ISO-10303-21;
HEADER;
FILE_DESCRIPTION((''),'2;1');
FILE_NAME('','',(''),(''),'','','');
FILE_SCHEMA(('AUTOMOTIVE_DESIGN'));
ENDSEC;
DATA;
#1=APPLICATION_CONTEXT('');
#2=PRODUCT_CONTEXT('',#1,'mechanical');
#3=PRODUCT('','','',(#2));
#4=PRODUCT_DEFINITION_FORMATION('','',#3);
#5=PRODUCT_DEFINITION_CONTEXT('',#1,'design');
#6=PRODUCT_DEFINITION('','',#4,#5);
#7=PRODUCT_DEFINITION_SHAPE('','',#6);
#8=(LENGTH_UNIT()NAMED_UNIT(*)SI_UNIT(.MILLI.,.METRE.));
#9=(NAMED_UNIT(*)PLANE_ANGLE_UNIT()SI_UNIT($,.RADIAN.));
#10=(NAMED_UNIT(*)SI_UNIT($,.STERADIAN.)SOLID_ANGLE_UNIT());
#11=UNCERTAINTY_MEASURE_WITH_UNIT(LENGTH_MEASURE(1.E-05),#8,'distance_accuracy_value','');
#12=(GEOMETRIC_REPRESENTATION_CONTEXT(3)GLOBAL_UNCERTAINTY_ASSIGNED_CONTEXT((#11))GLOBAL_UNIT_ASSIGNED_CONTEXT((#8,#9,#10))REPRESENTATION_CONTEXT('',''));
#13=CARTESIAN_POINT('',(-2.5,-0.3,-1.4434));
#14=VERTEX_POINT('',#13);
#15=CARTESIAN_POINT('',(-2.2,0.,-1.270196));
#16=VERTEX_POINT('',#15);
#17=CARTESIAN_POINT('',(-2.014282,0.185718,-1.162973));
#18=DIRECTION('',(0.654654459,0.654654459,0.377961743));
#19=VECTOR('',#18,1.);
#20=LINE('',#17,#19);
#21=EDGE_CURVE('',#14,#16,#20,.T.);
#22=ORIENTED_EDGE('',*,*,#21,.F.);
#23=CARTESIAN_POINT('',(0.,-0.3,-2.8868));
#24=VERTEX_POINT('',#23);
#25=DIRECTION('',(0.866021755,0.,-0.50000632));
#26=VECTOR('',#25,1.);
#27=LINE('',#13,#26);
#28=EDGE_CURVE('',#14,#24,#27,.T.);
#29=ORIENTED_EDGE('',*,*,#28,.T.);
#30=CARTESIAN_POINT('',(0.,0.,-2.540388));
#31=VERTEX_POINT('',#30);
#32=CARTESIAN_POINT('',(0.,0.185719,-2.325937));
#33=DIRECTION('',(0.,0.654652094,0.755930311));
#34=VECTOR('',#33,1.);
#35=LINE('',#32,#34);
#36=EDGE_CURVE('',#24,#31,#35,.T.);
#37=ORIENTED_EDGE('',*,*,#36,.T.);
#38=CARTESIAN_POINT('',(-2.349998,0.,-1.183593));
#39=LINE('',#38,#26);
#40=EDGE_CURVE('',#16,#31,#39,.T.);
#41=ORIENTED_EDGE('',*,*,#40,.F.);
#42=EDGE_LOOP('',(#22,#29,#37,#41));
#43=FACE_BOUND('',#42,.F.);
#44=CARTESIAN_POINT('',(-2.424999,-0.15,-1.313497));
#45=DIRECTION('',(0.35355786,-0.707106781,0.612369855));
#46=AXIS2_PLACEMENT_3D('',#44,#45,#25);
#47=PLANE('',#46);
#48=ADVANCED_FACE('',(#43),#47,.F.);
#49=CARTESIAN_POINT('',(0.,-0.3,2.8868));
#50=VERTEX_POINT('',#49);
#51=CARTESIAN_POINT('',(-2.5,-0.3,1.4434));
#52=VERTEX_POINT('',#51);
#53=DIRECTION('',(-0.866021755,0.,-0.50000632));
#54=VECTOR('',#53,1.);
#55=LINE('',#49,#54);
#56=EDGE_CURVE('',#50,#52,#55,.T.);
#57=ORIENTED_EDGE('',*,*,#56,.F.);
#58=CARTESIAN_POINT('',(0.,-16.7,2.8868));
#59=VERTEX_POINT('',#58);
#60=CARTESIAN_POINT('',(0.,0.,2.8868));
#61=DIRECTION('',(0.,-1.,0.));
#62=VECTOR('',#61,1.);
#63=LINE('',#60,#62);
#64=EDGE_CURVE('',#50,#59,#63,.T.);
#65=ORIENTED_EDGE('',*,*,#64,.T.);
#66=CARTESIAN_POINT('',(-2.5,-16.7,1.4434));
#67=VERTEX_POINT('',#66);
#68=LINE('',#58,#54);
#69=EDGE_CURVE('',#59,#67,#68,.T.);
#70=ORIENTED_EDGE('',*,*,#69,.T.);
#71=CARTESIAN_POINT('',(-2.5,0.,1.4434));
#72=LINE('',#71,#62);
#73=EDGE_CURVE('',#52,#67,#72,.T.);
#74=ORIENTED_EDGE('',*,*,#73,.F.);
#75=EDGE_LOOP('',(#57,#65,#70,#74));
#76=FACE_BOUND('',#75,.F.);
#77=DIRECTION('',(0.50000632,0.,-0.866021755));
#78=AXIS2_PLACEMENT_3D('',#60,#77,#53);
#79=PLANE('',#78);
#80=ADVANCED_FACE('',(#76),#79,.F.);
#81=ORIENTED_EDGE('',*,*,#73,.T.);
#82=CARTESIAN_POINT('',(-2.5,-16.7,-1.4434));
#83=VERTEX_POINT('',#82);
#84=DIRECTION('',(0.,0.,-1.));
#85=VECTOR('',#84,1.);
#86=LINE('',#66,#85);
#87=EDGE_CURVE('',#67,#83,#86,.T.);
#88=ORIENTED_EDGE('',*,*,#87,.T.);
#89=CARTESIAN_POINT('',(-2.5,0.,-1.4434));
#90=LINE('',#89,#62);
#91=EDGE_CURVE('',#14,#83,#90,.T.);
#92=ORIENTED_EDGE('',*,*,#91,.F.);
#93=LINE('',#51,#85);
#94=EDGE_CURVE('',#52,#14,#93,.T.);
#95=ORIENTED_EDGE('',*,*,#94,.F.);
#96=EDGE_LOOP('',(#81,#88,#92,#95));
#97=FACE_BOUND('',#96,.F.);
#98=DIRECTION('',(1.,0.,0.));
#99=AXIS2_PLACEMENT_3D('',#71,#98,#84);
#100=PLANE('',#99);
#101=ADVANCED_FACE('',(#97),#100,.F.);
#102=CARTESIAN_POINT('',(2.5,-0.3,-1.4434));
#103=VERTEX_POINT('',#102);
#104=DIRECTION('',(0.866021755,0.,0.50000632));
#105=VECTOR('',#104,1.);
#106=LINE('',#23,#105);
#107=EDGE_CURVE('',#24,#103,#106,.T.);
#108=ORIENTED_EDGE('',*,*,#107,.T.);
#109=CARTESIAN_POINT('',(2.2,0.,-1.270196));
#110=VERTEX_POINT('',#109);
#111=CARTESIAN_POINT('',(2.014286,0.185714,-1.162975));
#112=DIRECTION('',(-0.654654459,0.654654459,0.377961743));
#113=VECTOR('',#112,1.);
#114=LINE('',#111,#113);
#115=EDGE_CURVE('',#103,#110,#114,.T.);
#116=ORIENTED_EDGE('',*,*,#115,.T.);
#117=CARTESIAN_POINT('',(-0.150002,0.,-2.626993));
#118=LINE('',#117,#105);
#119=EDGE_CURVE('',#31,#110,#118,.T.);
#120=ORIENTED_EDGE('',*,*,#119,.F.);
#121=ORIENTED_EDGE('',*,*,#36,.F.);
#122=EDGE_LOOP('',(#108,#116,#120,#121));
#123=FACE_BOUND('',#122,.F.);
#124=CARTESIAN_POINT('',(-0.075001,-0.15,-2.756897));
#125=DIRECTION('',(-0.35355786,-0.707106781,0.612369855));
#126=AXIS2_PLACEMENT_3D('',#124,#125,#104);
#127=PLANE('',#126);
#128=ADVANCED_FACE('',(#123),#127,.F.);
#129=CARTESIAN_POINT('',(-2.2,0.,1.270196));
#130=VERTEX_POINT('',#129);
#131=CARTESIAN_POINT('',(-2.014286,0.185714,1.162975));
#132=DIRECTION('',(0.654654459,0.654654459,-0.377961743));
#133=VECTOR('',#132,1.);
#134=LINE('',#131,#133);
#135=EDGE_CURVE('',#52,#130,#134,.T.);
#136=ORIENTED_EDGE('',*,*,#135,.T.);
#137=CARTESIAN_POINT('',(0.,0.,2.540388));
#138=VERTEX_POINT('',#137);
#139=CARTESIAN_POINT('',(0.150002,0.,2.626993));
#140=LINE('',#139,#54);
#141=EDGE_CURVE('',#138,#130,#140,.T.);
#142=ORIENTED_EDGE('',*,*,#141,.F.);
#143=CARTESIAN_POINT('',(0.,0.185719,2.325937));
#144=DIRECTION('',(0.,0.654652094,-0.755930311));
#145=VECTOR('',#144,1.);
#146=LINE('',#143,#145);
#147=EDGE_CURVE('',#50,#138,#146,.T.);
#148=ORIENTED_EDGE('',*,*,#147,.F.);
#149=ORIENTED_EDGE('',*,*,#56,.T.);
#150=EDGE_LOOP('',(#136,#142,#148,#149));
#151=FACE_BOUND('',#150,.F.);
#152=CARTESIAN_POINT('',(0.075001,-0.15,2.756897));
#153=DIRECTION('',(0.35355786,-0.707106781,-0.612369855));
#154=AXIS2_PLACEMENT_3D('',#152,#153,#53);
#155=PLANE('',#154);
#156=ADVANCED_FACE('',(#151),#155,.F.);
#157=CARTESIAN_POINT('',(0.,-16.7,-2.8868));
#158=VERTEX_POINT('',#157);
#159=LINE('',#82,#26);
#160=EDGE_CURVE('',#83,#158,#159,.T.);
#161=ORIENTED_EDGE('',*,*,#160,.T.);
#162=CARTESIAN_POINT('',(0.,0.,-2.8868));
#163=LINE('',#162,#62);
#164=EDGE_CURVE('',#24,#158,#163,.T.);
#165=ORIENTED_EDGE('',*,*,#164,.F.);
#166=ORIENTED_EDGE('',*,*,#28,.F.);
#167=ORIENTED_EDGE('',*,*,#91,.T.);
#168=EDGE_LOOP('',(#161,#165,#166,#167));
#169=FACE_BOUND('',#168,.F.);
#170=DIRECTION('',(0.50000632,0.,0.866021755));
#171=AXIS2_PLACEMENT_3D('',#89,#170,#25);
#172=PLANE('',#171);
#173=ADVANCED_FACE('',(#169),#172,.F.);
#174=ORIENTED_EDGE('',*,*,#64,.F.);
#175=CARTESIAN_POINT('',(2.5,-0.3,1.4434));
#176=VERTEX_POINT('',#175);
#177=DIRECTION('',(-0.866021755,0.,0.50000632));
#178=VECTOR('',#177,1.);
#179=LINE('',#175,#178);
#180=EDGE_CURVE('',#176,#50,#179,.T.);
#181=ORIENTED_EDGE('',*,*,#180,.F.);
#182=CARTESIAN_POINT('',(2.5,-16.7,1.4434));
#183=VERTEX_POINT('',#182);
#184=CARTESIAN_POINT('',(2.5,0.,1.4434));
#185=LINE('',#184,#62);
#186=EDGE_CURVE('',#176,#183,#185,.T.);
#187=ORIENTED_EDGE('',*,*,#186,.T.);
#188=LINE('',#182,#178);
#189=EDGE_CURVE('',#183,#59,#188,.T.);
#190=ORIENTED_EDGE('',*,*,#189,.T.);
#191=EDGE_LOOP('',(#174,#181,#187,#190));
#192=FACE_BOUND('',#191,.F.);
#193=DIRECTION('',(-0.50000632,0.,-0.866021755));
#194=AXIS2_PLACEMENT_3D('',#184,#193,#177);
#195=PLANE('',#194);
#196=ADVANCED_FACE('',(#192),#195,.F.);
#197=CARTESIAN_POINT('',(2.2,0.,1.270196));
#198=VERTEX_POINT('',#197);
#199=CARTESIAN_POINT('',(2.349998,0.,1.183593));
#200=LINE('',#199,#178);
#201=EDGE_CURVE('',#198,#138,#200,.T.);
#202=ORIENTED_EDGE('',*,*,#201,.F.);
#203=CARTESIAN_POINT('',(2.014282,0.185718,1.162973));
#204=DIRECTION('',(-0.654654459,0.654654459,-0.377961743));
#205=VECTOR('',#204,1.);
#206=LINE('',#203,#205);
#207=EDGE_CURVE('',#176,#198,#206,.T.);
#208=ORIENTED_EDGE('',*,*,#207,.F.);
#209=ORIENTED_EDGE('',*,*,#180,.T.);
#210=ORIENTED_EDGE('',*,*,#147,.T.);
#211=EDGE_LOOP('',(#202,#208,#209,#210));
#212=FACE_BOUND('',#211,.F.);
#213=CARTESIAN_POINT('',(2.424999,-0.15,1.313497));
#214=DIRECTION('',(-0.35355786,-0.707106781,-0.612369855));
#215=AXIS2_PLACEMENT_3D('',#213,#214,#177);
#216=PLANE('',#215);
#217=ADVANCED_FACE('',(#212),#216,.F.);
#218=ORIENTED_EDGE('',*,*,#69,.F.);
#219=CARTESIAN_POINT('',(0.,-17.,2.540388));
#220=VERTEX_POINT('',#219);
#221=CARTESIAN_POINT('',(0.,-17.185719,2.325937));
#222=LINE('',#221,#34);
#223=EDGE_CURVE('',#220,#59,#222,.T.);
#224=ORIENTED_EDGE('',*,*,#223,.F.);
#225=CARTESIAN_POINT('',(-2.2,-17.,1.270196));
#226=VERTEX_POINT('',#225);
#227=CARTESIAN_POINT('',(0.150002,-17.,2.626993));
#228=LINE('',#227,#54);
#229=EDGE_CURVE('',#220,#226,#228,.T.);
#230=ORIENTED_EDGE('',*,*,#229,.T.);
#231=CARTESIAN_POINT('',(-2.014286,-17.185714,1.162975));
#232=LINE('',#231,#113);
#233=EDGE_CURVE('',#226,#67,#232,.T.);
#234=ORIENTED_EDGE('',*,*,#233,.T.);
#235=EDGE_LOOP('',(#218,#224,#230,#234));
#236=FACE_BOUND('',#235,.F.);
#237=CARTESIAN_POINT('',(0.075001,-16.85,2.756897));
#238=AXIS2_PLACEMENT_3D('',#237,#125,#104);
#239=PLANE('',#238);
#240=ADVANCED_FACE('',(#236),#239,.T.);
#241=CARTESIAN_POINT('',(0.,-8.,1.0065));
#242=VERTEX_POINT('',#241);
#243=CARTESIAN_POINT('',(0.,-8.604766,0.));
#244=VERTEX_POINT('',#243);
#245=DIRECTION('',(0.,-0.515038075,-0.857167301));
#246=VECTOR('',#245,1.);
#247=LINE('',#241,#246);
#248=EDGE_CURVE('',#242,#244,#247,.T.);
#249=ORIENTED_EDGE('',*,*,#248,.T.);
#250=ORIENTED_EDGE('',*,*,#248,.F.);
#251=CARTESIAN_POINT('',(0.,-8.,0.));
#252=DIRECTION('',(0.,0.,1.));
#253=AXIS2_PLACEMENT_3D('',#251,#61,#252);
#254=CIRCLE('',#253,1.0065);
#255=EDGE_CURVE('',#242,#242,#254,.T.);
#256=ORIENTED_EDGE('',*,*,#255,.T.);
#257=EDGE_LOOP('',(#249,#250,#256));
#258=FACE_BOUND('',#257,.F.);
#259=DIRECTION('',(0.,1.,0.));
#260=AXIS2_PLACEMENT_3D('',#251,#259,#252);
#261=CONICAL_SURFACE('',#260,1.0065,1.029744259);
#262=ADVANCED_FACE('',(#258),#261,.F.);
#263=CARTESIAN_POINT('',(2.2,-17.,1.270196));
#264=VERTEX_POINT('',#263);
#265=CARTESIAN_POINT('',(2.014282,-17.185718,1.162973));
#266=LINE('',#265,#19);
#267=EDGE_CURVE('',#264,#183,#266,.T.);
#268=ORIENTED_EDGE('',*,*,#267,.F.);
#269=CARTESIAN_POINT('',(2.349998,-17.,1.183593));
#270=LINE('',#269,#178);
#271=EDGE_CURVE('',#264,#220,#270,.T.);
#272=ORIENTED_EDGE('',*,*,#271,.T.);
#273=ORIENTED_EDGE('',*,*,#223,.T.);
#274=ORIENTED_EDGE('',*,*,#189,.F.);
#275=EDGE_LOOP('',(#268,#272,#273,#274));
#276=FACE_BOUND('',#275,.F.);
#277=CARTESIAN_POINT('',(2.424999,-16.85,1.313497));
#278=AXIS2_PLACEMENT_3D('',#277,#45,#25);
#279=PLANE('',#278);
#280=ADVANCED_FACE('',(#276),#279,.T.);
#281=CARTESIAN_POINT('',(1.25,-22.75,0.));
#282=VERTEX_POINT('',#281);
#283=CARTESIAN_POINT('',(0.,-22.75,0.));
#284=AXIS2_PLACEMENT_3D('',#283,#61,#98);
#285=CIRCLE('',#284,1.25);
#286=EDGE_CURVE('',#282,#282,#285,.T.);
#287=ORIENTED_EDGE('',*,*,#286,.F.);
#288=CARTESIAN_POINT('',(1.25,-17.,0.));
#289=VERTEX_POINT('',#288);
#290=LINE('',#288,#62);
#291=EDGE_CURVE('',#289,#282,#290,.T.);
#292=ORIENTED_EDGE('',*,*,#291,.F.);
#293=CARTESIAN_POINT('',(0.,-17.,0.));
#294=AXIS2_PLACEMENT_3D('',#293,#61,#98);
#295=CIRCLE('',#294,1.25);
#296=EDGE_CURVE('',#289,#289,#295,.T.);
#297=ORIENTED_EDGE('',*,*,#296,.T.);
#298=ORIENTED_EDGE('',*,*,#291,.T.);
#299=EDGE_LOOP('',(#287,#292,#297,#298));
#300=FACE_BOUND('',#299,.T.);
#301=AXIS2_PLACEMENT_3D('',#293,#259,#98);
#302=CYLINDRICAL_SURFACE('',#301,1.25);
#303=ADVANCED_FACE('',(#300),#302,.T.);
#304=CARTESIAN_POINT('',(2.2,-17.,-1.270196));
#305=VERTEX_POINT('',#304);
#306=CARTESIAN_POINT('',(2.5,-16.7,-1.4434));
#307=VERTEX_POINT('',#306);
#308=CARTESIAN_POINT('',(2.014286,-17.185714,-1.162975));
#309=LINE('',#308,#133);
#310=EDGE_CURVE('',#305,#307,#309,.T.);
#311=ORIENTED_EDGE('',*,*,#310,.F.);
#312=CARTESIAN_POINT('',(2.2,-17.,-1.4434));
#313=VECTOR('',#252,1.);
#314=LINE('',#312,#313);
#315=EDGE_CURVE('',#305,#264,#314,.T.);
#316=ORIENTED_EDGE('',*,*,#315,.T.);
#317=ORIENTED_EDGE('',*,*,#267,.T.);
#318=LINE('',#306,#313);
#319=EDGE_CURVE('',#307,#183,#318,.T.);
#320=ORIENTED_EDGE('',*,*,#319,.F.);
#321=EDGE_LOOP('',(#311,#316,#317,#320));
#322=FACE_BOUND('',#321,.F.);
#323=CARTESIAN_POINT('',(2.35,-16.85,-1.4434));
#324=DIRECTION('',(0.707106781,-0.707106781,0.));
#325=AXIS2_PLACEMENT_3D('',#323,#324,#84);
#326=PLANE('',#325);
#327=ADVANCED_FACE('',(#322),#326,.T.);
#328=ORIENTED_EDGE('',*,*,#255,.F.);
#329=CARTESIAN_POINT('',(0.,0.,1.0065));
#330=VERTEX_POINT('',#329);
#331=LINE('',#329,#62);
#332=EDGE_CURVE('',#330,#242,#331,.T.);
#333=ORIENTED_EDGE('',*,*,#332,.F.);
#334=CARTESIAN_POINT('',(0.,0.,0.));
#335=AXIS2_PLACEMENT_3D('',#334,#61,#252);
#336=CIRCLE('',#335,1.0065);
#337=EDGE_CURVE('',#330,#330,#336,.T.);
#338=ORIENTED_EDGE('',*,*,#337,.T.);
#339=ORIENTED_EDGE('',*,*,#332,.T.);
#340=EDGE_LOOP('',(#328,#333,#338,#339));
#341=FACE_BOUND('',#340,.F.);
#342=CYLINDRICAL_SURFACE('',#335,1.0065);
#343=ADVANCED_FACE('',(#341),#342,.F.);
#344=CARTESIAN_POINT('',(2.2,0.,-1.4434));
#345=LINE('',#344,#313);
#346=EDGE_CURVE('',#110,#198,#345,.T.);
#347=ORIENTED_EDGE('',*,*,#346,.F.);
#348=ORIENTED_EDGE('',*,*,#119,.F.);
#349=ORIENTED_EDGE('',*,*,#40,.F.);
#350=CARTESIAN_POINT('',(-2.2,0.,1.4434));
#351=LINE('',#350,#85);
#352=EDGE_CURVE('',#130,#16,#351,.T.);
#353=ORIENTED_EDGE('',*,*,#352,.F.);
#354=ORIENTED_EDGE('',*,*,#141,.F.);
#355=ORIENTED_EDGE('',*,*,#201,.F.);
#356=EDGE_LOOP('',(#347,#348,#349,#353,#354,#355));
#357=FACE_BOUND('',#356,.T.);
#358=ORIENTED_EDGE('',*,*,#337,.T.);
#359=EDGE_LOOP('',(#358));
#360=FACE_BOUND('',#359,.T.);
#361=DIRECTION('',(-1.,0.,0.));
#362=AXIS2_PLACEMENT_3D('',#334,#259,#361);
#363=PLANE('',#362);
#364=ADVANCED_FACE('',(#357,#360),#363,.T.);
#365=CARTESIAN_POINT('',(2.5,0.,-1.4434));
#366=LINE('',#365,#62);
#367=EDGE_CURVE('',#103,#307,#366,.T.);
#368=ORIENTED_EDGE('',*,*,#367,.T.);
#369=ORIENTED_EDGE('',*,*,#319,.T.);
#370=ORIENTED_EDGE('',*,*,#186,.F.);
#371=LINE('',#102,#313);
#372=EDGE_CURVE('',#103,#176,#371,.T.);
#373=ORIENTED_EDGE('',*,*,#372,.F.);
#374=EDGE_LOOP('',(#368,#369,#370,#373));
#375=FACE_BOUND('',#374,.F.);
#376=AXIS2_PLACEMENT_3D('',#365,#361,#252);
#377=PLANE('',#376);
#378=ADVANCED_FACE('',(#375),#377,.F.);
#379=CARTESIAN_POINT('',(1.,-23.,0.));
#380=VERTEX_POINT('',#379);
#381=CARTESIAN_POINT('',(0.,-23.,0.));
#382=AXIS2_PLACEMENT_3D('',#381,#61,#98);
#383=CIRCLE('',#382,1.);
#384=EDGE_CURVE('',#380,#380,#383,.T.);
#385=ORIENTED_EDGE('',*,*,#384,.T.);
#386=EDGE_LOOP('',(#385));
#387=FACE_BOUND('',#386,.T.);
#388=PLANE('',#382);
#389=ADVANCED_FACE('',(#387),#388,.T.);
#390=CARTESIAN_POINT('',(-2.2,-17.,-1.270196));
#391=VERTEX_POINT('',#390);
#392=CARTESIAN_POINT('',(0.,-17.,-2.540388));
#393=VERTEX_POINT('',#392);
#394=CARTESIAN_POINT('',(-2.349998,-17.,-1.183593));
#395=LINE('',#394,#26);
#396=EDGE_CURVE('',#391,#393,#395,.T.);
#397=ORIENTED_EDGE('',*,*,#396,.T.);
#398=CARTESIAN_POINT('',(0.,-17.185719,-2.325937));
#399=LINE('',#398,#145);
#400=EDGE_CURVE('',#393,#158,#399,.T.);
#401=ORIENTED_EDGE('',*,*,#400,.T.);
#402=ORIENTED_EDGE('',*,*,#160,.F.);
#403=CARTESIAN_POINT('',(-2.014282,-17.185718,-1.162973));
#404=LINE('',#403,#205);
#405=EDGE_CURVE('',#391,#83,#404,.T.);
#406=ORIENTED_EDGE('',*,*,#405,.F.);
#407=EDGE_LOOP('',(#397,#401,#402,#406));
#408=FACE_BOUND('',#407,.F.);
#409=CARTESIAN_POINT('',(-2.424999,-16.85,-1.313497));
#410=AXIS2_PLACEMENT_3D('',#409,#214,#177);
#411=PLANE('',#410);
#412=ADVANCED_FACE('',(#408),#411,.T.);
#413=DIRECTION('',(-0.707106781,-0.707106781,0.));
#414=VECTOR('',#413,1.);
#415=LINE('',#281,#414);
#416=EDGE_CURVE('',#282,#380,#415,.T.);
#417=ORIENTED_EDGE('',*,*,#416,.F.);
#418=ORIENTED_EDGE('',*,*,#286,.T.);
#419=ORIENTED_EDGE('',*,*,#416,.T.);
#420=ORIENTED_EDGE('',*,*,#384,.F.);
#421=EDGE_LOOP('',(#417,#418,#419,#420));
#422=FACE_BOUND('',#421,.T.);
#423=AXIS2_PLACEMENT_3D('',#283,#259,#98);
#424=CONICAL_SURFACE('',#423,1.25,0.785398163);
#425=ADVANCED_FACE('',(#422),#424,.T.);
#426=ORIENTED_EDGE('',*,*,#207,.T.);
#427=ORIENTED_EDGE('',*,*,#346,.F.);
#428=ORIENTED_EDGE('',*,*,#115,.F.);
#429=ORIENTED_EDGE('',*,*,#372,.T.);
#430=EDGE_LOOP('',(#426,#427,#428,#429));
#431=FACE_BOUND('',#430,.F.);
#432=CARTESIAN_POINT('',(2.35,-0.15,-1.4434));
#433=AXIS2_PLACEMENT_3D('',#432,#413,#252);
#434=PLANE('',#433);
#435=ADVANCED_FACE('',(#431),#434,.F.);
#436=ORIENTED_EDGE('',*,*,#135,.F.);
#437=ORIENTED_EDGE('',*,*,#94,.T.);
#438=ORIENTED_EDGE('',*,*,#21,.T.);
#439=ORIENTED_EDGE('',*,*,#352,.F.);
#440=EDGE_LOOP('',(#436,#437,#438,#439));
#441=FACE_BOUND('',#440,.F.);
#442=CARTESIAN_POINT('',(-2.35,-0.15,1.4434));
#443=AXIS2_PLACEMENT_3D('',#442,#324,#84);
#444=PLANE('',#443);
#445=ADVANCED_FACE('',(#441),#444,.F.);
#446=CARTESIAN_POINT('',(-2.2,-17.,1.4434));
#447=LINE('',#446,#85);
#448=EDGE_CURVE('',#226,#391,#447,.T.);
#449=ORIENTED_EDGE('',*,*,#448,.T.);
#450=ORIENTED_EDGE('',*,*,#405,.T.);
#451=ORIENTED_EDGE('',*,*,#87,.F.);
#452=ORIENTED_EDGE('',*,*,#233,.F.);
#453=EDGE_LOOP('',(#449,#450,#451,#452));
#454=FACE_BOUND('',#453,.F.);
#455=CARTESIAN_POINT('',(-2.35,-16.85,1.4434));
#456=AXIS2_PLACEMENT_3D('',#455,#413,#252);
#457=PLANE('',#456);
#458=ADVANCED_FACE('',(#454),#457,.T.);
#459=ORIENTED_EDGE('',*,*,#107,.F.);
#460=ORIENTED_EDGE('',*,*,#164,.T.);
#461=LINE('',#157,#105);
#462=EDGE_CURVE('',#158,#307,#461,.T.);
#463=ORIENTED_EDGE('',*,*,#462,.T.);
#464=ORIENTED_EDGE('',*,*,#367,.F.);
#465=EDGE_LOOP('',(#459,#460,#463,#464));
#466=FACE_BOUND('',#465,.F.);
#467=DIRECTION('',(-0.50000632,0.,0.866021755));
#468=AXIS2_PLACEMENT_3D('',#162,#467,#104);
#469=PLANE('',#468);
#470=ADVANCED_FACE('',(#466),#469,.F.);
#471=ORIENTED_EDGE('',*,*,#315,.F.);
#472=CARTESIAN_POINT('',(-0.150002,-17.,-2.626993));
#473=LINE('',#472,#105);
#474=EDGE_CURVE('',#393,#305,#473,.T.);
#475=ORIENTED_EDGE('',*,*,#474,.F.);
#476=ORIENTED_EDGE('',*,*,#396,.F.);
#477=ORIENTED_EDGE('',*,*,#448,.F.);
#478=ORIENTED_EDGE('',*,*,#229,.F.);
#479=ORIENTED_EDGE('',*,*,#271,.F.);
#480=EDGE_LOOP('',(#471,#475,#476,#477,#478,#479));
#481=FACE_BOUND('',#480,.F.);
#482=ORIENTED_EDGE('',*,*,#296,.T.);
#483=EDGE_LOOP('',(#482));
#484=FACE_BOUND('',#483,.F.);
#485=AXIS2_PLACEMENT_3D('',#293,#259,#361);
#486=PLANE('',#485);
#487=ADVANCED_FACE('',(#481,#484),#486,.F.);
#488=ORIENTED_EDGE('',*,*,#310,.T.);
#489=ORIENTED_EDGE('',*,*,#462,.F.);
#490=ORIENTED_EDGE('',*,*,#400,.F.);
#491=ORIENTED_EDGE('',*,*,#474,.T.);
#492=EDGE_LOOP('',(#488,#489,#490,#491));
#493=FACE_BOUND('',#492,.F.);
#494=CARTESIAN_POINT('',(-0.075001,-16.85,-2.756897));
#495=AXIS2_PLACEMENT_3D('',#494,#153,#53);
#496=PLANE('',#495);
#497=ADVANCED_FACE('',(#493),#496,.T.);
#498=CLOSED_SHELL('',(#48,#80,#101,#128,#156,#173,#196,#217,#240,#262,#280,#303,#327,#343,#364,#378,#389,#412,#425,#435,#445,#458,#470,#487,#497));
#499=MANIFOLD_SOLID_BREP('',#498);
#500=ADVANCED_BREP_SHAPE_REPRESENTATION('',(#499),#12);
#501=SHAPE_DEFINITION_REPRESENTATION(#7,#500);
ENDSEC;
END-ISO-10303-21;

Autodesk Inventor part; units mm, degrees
ref_plane "YZ Plane" through (0, 0, 0) normal (1, 0, 0) x (0, 1, 0)
ref_plane "XZ Plane" through (0, 0, 0) normal (0, 1, 0) x (-1, 0, 0)
ref_plane "XY Plane" through (0, 0, 0) normal (0, 0, 1) x (1, 0, 0)
sketch "Skizze1" plane through (0, 0, 0) normal (0, 1, 0) x (-1, 0, 0)
  line L0 (2.5, -1.4434) -> (0, -2.8868)
  line L1 (0, -2.8868) -> (-2.5, -1.4434)
  line L2 (-2.5, -1.4434) -> (-2.5, 1.4434)
  line L3 (-2.5, 1.4434) -> (0, 2.8868)
  line L4 (0, 2.8868) -> (2.5, 1.4434)
  line L5 (2.5, 1.4434) -> (2.5, -1.4434)
  point P0 (0, 0)
  point P1 (0, 0)
  point P2 (0, 0)
  dimension "d0" = 5
extrude "Extrusion1" add sketch "Skizze1" against normal blind 17
hole "Bohrung1" at (0, 0, 0) direction (0, -1, 0) diameter 2.013 depth 8 tip angle 118 thread size "M2.5x0.45" class "6H" standard "ISO Metric profile"
sketch "Skizze2" plane through (0, -17, 0) normal (0, -1, 0) x (1, 0, 0)
  circle A0 centre (0, 0) radius 1.0065 projected
  circle A1 centre (0, 0) radius 1.25
  dimension "d10" = 2.5
extrude "Extrusion2" add sketch "Skizze2" along normal blind 6 contours A0 | A1
thread "Gewinde1" size "M2.5x0.45" class "6g" standard "ISO Metric profile" full length
chamfer "Fasen1" distance 0.25 angle 45 1 edges at (-1.25, -23, 0)
chamfer "Fasen2" distance 0.3 angle 45 12 edges at (2.5, 0, 0) (1.25, 0, 2.1651) (-1.25, 0, 2.1651) (-2.5, 0, 0) (-1.25, 0, -2.1651) (1.25, 0, -2.1651) (2.5, -17, 0) (1.25, -17, 2.1651) (-1.25, -17, 2.1651) (-2.5, -17, 0) (-1.25, -17, -2.1651) (1.25, -17, -2.1651)
properties part number "Abstandsbolzen 17mm"
